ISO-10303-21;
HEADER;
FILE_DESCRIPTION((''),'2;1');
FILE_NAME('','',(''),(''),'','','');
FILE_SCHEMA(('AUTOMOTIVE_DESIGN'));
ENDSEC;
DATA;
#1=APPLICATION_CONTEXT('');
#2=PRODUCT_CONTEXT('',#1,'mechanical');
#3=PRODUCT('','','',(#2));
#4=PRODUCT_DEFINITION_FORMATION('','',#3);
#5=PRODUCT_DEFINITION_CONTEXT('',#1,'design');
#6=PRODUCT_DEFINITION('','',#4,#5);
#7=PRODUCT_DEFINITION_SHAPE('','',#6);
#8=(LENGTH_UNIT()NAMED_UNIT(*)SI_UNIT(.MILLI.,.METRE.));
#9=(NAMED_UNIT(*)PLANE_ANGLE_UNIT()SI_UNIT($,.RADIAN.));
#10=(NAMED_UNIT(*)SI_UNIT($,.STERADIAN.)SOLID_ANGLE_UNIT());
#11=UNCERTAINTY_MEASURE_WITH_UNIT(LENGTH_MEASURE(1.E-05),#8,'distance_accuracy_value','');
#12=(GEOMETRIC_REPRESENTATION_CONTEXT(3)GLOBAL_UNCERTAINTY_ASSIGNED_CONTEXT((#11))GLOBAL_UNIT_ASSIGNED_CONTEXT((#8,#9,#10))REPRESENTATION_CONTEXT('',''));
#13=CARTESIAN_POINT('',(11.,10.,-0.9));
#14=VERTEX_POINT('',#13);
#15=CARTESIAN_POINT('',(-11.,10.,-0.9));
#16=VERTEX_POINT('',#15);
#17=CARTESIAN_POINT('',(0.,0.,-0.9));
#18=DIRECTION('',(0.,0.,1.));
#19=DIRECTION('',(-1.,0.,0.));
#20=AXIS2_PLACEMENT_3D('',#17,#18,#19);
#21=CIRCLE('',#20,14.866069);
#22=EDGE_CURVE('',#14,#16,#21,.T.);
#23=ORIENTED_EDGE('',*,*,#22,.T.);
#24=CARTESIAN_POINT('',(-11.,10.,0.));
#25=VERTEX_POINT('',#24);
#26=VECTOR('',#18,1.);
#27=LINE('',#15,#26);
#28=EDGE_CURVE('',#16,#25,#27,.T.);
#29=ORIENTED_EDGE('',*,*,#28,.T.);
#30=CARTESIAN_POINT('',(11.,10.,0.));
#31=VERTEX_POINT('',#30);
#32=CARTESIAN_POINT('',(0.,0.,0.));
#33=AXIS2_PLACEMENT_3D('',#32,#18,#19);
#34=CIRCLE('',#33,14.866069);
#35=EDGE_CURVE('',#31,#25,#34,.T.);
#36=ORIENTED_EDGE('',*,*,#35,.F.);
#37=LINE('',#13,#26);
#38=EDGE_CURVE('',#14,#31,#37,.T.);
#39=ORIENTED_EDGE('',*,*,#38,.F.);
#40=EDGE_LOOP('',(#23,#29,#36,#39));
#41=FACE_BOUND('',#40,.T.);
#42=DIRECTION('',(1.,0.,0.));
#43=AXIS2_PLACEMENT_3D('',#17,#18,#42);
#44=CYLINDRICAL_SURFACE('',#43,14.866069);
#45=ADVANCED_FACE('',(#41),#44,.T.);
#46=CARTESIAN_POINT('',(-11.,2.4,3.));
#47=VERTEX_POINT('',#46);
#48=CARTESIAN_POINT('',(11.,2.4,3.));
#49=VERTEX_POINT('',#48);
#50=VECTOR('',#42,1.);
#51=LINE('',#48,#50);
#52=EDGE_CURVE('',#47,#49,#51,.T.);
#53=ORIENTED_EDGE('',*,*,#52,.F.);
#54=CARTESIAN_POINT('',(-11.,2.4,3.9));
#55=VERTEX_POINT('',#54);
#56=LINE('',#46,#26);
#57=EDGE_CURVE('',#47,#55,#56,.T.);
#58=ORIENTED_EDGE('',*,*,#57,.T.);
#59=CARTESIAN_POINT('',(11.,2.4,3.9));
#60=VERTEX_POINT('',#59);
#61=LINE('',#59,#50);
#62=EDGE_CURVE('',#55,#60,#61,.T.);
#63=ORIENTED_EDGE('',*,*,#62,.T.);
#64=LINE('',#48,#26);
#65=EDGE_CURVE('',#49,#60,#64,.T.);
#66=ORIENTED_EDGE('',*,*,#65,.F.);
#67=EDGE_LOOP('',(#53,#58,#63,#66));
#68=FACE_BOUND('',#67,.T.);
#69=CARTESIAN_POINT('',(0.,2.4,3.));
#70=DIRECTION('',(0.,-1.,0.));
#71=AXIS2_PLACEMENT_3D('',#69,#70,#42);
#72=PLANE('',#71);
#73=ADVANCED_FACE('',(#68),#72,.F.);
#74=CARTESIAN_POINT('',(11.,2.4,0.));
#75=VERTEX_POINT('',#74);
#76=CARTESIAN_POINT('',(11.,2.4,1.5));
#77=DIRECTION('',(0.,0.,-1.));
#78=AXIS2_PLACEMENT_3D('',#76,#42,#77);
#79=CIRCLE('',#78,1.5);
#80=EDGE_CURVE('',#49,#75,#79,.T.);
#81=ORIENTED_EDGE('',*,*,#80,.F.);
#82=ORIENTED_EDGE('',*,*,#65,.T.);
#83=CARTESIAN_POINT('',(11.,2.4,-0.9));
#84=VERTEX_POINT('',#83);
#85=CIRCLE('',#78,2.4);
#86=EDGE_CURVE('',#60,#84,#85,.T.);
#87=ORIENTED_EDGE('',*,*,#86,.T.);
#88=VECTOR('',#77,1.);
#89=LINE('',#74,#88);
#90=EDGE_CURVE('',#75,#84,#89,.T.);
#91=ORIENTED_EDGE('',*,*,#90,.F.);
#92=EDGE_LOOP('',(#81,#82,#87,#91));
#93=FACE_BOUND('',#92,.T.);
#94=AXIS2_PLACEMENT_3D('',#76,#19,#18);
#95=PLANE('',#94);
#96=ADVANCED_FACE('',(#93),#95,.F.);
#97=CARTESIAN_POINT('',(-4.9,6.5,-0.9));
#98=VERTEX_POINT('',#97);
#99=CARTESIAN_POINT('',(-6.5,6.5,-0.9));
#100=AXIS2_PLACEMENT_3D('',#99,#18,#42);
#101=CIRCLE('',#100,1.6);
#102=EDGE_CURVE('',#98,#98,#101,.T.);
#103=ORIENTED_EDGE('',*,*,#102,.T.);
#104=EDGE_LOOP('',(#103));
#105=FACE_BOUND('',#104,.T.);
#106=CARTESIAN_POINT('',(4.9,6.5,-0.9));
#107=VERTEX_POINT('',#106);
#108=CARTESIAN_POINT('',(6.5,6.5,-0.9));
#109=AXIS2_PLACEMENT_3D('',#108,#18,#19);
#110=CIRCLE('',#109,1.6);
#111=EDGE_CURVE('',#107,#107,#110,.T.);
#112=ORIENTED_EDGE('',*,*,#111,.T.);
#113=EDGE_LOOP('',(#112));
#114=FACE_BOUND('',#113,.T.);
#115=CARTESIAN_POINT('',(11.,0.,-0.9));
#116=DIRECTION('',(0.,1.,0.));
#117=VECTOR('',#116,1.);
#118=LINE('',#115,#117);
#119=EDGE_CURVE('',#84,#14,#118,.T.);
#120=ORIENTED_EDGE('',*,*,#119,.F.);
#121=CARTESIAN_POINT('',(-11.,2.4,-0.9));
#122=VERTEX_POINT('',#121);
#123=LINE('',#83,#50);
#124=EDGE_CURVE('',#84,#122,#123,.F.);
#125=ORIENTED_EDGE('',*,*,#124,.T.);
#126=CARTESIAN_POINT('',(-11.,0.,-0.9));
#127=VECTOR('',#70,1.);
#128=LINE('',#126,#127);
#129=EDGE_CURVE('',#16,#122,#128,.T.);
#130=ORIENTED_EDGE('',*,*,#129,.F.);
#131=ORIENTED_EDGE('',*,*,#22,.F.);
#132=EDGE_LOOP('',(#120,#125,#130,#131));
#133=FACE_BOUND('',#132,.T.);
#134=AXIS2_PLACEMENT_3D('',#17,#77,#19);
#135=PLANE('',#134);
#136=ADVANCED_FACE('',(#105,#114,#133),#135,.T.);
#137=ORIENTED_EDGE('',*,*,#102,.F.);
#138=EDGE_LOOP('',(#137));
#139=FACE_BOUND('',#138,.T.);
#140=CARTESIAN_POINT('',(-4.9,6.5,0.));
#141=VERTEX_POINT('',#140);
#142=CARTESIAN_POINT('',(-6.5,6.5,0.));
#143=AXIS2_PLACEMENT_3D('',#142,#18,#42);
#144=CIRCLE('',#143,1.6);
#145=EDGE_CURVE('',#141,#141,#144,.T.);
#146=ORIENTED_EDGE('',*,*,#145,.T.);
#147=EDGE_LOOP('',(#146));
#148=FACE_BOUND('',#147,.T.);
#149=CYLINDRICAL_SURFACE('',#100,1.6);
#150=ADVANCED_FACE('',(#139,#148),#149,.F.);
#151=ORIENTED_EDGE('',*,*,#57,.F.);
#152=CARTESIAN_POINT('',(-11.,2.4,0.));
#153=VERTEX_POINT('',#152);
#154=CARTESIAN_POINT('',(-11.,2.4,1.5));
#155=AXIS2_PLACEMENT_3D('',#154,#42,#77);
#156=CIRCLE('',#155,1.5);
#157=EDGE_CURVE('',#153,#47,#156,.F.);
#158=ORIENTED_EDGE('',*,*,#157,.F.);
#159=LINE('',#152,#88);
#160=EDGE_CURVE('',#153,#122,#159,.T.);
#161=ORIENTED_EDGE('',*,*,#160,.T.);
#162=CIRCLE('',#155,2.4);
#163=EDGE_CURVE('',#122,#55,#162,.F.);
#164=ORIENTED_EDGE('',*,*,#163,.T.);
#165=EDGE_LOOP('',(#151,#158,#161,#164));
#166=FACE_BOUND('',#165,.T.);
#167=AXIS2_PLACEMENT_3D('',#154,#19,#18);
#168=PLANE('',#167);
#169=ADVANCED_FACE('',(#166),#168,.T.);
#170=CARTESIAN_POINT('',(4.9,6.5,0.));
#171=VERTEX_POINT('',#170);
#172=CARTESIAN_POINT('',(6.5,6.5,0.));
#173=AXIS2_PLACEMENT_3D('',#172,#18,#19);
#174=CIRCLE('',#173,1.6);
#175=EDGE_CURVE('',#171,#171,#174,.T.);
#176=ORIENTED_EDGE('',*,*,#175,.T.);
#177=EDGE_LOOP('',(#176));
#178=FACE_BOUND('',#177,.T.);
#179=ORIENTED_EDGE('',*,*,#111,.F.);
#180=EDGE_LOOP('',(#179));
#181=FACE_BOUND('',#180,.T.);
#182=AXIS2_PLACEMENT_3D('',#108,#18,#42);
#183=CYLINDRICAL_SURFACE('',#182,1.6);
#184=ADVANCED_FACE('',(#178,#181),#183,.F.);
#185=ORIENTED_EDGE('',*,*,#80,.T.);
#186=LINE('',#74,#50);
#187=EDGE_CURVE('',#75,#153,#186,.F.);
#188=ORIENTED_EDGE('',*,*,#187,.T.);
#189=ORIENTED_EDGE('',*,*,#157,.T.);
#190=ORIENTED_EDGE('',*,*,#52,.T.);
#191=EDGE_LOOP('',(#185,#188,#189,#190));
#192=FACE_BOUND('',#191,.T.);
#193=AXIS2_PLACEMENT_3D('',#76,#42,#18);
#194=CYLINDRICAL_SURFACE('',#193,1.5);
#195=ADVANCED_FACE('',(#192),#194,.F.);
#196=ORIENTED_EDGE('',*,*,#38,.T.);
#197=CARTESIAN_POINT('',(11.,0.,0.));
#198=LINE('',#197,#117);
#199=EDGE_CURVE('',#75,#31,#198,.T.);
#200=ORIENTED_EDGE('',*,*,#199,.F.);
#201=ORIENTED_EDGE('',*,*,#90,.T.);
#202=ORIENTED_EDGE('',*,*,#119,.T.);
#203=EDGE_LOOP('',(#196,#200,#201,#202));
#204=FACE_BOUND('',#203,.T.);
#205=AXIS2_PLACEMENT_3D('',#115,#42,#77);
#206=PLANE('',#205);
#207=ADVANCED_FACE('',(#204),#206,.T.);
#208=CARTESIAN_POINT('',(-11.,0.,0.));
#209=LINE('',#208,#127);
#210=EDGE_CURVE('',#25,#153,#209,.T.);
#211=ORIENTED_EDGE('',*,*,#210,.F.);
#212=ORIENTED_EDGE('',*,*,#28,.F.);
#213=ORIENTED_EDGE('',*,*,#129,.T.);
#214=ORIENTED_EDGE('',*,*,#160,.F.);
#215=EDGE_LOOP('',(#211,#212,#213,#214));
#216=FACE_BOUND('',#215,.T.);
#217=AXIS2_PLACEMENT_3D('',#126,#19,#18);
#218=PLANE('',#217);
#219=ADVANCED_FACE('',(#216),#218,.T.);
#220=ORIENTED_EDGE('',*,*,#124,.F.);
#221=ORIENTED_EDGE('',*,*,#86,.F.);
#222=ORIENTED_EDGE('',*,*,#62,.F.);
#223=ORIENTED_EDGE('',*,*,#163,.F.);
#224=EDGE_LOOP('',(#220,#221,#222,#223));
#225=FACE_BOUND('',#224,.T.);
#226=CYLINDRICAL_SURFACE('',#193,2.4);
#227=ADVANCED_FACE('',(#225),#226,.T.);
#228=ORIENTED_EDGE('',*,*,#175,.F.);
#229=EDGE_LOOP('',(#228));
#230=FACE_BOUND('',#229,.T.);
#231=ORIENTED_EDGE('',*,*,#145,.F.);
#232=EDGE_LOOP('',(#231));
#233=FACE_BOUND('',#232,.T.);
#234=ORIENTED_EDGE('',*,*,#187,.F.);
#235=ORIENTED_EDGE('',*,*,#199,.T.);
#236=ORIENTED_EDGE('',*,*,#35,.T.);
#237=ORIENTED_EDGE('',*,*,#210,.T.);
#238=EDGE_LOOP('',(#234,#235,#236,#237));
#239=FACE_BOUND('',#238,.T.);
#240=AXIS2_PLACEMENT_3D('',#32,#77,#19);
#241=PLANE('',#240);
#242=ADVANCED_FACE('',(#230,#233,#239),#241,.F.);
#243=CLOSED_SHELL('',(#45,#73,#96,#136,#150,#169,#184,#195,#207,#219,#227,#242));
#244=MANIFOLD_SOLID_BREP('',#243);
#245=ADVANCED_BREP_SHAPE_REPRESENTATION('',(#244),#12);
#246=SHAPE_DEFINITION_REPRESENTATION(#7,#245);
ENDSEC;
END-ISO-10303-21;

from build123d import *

# Parameters (mm, degrees)
SKETCH_1_R             = 1.6
SM_BASE_FLANGE_1_DEPTH = 0.9
OTHER_START            = -11
OTHER_1_DEPTH          = 22
OTHER_1_2_DEPTH        = 22


# Read off the part's stored shape, not the designer's step: 褶边1
# Sheet-metal steps are written as plain solids
with BuildPart() as part:
    # Sketch 1 → 基体-法兰1 (new body)
    with BuildSketch(Plane.XY):
        with BuildLine():
            Line((11, 0), (-11, 0))
            Line((-11, 0), (-11, 10))
            ThreePointArc((-11, 10), (0, 14.866068747), (11, 10))
            Line((11, 10), (11, 0))
        make_face()
        with Locations((-6.5, 6.5)):
            Circle(SKETCH_1_R, mode=Mode.SUBTRACT)
        with Locations(Location((6.5, 6.5, 0), (0, 0, 180))):
            Circle(SKETCH_1_R, mode=Mode.SUBTRACT)
    extrude(amount=-SM_BASE_FLANGE_1_DEPTH)

    # Other 1 outline → Other 1 (cut)
    with BuildSketch(Plane.YZ.offset(OTHER_START)):
        with BuildLine():
            ThreePointArc((2.4, -0.9), (1.360769515, -0.663330765), (0.5265006, 0))
            Line((0.5265006, 0), (0, 0))
            Line((0, 0), (0, -0.9))
            Line((0, -0.9), (2.4, -0.9))
        make_face()
    extrude(amount=OTHER_1_DEPTH, mode=Mode.SUBTRACT)

    # Other 1 2 outline → Other 1 2 (add)
    with BuildSketch(Plane.YZ.offset(OTHER_START)):
        with BuildLine():
            Line((2.4, 3), (2.4, 3.9))
            ThreePointArc((2.4, 3.9), (0.236669235, 2.539230485), (0.5265006, 0))
            Line((0.5265006, 0), (2.4, 0))
            ThreePointArc((2.4, 0), (0.9, 1.5), (2.4, 3))
        make_face()
    extrude(amount=OTHER_1_2_DEPTH)


solid = part.part
